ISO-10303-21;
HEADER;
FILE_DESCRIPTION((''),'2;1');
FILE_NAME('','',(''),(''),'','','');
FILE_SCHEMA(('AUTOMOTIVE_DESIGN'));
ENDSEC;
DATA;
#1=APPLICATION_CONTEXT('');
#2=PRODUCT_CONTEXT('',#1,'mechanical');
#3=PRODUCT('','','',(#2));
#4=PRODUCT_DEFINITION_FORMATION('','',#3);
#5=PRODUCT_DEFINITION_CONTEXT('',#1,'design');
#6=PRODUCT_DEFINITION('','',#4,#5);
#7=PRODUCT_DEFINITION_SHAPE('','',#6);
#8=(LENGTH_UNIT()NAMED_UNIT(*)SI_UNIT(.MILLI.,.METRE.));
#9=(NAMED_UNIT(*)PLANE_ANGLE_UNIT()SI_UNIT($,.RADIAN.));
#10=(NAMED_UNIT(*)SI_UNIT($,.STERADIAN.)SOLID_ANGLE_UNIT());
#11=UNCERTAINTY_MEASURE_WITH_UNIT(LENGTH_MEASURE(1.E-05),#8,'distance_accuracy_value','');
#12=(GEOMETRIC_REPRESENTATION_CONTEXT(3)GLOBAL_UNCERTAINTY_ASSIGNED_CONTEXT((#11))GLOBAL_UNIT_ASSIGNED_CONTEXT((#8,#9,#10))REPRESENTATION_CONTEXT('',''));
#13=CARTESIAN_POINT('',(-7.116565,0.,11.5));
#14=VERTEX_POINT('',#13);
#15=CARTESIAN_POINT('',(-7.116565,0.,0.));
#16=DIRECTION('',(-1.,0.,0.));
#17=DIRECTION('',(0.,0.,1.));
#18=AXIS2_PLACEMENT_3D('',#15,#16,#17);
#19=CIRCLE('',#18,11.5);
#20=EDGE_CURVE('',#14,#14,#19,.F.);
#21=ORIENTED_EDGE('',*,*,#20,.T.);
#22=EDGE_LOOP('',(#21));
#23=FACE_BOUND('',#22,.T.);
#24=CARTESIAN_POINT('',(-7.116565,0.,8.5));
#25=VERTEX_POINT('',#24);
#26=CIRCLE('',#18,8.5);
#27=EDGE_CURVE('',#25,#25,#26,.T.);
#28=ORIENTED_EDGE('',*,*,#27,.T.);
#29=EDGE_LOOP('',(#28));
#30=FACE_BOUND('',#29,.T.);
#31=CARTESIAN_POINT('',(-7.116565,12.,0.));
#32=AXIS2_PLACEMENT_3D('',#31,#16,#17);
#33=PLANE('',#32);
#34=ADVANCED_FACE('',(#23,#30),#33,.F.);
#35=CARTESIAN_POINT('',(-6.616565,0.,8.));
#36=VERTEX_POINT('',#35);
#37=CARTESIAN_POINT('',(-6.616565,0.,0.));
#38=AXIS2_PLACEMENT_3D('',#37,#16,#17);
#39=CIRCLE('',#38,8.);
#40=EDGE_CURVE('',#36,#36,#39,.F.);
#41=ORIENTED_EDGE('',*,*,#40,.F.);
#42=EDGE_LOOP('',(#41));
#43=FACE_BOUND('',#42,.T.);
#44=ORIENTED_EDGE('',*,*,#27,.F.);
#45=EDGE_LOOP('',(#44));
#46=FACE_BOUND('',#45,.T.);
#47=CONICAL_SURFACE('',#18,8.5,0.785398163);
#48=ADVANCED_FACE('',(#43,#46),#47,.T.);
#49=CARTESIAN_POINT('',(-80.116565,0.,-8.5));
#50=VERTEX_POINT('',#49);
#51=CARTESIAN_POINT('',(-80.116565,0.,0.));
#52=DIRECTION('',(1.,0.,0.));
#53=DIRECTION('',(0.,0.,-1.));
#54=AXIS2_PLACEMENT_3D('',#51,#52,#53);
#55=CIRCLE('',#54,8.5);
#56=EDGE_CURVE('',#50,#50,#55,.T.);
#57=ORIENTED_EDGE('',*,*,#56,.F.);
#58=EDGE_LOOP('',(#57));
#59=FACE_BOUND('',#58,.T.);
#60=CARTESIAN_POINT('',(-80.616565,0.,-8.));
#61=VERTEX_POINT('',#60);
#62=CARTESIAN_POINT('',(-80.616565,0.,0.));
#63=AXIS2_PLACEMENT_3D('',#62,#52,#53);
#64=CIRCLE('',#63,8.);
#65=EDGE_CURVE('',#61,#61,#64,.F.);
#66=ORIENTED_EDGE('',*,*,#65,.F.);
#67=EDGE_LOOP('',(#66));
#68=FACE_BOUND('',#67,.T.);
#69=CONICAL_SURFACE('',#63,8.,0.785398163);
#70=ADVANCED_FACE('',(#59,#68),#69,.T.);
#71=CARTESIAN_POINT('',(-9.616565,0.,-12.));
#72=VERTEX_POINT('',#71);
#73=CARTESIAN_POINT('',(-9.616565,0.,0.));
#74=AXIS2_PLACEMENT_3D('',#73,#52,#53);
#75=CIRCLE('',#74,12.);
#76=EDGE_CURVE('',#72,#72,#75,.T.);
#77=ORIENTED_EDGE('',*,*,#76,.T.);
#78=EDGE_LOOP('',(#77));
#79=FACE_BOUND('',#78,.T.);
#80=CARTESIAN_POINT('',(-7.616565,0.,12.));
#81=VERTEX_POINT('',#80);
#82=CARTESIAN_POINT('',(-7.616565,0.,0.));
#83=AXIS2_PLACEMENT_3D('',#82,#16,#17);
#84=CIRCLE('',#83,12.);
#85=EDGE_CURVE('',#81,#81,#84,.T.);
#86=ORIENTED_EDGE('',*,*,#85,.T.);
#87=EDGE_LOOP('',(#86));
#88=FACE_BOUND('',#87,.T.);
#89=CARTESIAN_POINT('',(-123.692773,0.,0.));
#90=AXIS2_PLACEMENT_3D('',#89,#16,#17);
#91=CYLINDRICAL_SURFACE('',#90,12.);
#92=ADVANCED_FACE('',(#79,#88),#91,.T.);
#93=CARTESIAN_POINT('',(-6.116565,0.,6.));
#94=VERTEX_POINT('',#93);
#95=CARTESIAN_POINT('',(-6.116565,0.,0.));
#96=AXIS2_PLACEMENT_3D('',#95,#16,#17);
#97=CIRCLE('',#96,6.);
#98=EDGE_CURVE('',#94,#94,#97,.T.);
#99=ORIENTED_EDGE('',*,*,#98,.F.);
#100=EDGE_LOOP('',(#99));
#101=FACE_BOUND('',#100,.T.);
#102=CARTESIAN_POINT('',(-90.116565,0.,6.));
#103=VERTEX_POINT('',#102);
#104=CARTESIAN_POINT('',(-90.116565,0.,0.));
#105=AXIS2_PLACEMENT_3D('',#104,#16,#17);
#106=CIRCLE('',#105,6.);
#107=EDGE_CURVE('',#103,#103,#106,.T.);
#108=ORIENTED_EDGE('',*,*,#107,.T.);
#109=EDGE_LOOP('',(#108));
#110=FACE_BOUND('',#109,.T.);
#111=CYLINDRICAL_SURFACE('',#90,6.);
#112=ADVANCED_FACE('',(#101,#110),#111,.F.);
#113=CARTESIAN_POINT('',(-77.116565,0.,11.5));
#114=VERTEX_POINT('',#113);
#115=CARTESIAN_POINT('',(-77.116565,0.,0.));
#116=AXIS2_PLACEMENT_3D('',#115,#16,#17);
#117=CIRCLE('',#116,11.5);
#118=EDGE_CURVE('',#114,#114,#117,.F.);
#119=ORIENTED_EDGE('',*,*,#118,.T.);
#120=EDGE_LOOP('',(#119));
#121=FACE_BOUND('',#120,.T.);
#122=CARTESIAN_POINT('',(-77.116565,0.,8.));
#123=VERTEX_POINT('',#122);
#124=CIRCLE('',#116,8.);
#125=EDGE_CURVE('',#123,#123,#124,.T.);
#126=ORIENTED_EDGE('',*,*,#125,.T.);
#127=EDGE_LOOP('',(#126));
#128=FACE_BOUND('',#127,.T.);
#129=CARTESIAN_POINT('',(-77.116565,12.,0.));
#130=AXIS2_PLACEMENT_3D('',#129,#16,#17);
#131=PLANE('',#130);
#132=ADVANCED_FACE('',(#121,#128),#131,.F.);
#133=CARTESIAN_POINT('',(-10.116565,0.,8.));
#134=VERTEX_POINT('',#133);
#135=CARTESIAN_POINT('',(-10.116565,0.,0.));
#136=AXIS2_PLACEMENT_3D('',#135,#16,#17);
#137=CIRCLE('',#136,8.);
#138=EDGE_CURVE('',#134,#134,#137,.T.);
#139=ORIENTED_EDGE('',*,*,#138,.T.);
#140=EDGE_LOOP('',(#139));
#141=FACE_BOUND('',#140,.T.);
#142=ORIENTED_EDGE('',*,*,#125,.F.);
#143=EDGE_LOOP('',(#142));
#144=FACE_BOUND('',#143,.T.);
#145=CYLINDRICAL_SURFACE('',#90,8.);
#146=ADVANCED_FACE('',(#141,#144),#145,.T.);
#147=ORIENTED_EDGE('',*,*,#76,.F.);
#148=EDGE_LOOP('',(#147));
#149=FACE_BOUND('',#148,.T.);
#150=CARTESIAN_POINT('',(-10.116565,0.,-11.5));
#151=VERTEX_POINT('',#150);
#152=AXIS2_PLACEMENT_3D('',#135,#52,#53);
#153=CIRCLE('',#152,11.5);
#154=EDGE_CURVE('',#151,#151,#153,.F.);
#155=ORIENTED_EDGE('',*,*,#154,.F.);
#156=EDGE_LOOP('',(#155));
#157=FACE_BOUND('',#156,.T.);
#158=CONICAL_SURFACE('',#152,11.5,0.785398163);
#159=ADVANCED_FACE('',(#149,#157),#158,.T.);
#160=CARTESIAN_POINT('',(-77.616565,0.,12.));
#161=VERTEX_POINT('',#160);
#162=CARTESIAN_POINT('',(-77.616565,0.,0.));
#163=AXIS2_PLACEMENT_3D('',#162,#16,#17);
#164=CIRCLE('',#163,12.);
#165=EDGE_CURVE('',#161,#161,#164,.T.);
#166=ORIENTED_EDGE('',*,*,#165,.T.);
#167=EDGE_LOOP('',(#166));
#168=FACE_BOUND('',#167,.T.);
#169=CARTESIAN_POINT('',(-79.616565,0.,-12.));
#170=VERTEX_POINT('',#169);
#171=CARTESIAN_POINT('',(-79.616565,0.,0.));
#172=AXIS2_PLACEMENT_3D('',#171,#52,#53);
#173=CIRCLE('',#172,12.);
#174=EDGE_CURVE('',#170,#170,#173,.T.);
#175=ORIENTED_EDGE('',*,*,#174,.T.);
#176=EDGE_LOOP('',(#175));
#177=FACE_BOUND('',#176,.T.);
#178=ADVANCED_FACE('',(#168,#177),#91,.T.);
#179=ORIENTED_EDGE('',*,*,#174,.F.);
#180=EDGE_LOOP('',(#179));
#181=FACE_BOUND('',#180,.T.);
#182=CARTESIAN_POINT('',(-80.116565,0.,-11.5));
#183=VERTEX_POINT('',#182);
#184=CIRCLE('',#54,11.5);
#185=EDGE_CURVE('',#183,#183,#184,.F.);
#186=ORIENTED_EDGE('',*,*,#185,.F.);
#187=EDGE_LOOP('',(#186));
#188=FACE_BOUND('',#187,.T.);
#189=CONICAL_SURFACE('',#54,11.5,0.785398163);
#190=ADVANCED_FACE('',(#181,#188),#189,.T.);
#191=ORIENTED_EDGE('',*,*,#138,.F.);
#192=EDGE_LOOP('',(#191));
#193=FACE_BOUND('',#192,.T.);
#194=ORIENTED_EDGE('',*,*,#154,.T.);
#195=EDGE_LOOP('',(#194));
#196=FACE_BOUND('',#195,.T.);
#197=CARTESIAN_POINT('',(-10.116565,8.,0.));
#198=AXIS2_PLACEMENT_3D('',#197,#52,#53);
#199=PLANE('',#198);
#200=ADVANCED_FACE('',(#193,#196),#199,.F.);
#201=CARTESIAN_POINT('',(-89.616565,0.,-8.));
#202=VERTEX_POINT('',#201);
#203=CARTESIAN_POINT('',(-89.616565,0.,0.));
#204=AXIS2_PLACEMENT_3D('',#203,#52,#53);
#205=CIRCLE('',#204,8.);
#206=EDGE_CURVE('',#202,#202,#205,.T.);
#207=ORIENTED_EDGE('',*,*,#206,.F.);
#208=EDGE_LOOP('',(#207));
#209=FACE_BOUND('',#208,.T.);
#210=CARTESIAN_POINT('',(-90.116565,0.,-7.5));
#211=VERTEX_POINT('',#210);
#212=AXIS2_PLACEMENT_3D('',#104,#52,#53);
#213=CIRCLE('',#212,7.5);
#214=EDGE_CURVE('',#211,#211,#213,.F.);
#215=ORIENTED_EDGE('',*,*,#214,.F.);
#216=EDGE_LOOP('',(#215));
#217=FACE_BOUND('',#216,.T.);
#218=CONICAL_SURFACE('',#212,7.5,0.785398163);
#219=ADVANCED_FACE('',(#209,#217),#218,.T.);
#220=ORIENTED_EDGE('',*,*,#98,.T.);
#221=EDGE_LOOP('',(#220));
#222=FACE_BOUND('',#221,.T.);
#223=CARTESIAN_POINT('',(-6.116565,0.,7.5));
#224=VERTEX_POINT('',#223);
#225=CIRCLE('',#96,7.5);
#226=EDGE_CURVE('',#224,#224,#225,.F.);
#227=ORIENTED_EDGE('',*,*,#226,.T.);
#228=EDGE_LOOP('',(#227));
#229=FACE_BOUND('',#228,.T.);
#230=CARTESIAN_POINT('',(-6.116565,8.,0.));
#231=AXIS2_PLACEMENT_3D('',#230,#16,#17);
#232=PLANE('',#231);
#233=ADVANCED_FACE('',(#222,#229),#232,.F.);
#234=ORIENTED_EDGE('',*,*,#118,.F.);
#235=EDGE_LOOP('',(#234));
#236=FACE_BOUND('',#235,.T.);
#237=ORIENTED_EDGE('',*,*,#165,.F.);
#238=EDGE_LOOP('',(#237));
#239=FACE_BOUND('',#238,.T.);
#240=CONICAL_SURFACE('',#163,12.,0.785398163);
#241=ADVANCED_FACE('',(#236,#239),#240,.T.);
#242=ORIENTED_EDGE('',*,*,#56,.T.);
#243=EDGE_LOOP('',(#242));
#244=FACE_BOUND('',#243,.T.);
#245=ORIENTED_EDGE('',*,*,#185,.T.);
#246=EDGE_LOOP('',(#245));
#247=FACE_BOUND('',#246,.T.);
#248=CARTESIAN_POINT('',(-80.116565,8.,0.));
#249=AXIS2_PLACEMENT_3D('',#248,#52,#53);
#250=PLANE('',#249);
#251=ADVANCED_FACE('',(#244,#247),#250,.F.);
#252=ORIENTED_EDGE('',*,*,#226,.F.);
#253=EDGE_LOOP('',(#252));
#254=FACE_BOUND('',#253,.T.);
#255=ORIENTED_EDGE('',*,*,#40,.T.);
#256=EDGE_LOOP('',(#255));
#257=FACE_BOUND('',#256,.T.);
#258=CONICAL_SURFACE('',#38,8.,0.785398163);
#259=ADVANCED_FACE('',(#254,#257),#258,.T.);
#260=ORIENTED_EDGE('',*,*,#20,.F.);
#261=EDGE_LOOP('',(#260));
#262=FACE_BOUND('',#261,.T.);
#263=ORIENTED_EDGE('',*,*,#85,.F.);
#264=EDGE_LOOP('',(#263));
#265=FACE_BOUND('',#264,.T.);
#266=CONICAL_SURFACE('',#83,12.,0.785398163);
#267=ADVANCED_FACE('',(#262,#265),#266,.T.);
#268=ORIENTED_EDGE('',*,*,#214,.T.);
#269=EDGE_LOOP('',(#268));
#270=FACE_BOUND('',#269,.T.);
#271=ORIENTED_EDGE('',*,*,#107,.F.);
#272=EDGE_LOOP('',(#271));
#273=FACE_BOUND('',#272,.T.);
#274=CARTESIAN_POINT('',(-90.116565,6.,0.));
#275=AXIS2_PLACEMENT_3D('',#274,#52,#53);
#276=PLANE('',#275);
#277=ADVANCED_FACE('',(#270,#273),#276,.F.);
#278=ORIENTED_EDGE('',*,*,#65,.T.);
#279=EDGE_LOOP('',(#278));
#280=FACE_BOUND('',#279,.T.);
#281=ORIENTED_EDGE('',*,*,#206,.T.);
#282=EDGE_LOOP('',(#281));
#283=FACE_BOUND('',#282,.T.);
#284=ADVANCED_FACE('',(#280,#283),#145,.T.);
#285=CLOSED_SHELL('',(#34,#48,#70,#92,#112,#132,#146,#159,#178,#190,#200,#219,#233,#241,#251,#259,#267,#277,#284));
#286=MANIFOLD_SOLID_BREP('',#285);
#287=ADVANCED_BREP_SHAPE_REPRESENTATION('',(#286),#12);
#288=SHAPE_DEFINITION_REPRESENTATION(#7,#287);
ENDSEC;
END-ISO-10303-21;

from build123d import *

# Parameters (mm, degrees)
CHAMFER1_SIZE = 0.5


with BuildPart() as part:
    # Sketch1 → Revolve1 (revolve)
    with BuildSketch(Plane.XY, mode=Mode.PRIVATE) as revolve1_sk:
        Polygon((-90.116565428, 8), (-80.116565428, 8), (-80.116565428, 12), (-77.116565428, 12), (-77.116565428, 8), (-10.116565428, 8), (-10.116565428, 12), (-7.116565428, 12), (-7.116565428, 8), (-6.116565428, 8), (-6.116565428, 6), (-90.116565428, 6), align=None)
    revolve(revolve1_sk.sketch.rotate(Axis((-123.692772778, 0, 0), (1, 0, 0)), 90), axis=Axis((-123.692772778, 0, 0), (1, 0, 0)))

    # Chamfer1
    chamfer1_edges = [part.edges().sort_by_distance(p)[0] for p in [
        (-7.116565428, 0, -12),
        (-10.116565428, 0, -12),
        (-77.116565428, 0, -12),
        (-80.116565428, 0, -12),
        (-80.116565428, 0, -8),
        (-90.116565428, 0, -8),
        (-6.116565428, 0, -8),
        (-7.116565428, 0, -8),
    ]]
    chamfer(chamfer1_edges, length=CHAMFER1_SIZE - 0.0001)  # a hair under: the kernel refuses the full size


solid = part.part
